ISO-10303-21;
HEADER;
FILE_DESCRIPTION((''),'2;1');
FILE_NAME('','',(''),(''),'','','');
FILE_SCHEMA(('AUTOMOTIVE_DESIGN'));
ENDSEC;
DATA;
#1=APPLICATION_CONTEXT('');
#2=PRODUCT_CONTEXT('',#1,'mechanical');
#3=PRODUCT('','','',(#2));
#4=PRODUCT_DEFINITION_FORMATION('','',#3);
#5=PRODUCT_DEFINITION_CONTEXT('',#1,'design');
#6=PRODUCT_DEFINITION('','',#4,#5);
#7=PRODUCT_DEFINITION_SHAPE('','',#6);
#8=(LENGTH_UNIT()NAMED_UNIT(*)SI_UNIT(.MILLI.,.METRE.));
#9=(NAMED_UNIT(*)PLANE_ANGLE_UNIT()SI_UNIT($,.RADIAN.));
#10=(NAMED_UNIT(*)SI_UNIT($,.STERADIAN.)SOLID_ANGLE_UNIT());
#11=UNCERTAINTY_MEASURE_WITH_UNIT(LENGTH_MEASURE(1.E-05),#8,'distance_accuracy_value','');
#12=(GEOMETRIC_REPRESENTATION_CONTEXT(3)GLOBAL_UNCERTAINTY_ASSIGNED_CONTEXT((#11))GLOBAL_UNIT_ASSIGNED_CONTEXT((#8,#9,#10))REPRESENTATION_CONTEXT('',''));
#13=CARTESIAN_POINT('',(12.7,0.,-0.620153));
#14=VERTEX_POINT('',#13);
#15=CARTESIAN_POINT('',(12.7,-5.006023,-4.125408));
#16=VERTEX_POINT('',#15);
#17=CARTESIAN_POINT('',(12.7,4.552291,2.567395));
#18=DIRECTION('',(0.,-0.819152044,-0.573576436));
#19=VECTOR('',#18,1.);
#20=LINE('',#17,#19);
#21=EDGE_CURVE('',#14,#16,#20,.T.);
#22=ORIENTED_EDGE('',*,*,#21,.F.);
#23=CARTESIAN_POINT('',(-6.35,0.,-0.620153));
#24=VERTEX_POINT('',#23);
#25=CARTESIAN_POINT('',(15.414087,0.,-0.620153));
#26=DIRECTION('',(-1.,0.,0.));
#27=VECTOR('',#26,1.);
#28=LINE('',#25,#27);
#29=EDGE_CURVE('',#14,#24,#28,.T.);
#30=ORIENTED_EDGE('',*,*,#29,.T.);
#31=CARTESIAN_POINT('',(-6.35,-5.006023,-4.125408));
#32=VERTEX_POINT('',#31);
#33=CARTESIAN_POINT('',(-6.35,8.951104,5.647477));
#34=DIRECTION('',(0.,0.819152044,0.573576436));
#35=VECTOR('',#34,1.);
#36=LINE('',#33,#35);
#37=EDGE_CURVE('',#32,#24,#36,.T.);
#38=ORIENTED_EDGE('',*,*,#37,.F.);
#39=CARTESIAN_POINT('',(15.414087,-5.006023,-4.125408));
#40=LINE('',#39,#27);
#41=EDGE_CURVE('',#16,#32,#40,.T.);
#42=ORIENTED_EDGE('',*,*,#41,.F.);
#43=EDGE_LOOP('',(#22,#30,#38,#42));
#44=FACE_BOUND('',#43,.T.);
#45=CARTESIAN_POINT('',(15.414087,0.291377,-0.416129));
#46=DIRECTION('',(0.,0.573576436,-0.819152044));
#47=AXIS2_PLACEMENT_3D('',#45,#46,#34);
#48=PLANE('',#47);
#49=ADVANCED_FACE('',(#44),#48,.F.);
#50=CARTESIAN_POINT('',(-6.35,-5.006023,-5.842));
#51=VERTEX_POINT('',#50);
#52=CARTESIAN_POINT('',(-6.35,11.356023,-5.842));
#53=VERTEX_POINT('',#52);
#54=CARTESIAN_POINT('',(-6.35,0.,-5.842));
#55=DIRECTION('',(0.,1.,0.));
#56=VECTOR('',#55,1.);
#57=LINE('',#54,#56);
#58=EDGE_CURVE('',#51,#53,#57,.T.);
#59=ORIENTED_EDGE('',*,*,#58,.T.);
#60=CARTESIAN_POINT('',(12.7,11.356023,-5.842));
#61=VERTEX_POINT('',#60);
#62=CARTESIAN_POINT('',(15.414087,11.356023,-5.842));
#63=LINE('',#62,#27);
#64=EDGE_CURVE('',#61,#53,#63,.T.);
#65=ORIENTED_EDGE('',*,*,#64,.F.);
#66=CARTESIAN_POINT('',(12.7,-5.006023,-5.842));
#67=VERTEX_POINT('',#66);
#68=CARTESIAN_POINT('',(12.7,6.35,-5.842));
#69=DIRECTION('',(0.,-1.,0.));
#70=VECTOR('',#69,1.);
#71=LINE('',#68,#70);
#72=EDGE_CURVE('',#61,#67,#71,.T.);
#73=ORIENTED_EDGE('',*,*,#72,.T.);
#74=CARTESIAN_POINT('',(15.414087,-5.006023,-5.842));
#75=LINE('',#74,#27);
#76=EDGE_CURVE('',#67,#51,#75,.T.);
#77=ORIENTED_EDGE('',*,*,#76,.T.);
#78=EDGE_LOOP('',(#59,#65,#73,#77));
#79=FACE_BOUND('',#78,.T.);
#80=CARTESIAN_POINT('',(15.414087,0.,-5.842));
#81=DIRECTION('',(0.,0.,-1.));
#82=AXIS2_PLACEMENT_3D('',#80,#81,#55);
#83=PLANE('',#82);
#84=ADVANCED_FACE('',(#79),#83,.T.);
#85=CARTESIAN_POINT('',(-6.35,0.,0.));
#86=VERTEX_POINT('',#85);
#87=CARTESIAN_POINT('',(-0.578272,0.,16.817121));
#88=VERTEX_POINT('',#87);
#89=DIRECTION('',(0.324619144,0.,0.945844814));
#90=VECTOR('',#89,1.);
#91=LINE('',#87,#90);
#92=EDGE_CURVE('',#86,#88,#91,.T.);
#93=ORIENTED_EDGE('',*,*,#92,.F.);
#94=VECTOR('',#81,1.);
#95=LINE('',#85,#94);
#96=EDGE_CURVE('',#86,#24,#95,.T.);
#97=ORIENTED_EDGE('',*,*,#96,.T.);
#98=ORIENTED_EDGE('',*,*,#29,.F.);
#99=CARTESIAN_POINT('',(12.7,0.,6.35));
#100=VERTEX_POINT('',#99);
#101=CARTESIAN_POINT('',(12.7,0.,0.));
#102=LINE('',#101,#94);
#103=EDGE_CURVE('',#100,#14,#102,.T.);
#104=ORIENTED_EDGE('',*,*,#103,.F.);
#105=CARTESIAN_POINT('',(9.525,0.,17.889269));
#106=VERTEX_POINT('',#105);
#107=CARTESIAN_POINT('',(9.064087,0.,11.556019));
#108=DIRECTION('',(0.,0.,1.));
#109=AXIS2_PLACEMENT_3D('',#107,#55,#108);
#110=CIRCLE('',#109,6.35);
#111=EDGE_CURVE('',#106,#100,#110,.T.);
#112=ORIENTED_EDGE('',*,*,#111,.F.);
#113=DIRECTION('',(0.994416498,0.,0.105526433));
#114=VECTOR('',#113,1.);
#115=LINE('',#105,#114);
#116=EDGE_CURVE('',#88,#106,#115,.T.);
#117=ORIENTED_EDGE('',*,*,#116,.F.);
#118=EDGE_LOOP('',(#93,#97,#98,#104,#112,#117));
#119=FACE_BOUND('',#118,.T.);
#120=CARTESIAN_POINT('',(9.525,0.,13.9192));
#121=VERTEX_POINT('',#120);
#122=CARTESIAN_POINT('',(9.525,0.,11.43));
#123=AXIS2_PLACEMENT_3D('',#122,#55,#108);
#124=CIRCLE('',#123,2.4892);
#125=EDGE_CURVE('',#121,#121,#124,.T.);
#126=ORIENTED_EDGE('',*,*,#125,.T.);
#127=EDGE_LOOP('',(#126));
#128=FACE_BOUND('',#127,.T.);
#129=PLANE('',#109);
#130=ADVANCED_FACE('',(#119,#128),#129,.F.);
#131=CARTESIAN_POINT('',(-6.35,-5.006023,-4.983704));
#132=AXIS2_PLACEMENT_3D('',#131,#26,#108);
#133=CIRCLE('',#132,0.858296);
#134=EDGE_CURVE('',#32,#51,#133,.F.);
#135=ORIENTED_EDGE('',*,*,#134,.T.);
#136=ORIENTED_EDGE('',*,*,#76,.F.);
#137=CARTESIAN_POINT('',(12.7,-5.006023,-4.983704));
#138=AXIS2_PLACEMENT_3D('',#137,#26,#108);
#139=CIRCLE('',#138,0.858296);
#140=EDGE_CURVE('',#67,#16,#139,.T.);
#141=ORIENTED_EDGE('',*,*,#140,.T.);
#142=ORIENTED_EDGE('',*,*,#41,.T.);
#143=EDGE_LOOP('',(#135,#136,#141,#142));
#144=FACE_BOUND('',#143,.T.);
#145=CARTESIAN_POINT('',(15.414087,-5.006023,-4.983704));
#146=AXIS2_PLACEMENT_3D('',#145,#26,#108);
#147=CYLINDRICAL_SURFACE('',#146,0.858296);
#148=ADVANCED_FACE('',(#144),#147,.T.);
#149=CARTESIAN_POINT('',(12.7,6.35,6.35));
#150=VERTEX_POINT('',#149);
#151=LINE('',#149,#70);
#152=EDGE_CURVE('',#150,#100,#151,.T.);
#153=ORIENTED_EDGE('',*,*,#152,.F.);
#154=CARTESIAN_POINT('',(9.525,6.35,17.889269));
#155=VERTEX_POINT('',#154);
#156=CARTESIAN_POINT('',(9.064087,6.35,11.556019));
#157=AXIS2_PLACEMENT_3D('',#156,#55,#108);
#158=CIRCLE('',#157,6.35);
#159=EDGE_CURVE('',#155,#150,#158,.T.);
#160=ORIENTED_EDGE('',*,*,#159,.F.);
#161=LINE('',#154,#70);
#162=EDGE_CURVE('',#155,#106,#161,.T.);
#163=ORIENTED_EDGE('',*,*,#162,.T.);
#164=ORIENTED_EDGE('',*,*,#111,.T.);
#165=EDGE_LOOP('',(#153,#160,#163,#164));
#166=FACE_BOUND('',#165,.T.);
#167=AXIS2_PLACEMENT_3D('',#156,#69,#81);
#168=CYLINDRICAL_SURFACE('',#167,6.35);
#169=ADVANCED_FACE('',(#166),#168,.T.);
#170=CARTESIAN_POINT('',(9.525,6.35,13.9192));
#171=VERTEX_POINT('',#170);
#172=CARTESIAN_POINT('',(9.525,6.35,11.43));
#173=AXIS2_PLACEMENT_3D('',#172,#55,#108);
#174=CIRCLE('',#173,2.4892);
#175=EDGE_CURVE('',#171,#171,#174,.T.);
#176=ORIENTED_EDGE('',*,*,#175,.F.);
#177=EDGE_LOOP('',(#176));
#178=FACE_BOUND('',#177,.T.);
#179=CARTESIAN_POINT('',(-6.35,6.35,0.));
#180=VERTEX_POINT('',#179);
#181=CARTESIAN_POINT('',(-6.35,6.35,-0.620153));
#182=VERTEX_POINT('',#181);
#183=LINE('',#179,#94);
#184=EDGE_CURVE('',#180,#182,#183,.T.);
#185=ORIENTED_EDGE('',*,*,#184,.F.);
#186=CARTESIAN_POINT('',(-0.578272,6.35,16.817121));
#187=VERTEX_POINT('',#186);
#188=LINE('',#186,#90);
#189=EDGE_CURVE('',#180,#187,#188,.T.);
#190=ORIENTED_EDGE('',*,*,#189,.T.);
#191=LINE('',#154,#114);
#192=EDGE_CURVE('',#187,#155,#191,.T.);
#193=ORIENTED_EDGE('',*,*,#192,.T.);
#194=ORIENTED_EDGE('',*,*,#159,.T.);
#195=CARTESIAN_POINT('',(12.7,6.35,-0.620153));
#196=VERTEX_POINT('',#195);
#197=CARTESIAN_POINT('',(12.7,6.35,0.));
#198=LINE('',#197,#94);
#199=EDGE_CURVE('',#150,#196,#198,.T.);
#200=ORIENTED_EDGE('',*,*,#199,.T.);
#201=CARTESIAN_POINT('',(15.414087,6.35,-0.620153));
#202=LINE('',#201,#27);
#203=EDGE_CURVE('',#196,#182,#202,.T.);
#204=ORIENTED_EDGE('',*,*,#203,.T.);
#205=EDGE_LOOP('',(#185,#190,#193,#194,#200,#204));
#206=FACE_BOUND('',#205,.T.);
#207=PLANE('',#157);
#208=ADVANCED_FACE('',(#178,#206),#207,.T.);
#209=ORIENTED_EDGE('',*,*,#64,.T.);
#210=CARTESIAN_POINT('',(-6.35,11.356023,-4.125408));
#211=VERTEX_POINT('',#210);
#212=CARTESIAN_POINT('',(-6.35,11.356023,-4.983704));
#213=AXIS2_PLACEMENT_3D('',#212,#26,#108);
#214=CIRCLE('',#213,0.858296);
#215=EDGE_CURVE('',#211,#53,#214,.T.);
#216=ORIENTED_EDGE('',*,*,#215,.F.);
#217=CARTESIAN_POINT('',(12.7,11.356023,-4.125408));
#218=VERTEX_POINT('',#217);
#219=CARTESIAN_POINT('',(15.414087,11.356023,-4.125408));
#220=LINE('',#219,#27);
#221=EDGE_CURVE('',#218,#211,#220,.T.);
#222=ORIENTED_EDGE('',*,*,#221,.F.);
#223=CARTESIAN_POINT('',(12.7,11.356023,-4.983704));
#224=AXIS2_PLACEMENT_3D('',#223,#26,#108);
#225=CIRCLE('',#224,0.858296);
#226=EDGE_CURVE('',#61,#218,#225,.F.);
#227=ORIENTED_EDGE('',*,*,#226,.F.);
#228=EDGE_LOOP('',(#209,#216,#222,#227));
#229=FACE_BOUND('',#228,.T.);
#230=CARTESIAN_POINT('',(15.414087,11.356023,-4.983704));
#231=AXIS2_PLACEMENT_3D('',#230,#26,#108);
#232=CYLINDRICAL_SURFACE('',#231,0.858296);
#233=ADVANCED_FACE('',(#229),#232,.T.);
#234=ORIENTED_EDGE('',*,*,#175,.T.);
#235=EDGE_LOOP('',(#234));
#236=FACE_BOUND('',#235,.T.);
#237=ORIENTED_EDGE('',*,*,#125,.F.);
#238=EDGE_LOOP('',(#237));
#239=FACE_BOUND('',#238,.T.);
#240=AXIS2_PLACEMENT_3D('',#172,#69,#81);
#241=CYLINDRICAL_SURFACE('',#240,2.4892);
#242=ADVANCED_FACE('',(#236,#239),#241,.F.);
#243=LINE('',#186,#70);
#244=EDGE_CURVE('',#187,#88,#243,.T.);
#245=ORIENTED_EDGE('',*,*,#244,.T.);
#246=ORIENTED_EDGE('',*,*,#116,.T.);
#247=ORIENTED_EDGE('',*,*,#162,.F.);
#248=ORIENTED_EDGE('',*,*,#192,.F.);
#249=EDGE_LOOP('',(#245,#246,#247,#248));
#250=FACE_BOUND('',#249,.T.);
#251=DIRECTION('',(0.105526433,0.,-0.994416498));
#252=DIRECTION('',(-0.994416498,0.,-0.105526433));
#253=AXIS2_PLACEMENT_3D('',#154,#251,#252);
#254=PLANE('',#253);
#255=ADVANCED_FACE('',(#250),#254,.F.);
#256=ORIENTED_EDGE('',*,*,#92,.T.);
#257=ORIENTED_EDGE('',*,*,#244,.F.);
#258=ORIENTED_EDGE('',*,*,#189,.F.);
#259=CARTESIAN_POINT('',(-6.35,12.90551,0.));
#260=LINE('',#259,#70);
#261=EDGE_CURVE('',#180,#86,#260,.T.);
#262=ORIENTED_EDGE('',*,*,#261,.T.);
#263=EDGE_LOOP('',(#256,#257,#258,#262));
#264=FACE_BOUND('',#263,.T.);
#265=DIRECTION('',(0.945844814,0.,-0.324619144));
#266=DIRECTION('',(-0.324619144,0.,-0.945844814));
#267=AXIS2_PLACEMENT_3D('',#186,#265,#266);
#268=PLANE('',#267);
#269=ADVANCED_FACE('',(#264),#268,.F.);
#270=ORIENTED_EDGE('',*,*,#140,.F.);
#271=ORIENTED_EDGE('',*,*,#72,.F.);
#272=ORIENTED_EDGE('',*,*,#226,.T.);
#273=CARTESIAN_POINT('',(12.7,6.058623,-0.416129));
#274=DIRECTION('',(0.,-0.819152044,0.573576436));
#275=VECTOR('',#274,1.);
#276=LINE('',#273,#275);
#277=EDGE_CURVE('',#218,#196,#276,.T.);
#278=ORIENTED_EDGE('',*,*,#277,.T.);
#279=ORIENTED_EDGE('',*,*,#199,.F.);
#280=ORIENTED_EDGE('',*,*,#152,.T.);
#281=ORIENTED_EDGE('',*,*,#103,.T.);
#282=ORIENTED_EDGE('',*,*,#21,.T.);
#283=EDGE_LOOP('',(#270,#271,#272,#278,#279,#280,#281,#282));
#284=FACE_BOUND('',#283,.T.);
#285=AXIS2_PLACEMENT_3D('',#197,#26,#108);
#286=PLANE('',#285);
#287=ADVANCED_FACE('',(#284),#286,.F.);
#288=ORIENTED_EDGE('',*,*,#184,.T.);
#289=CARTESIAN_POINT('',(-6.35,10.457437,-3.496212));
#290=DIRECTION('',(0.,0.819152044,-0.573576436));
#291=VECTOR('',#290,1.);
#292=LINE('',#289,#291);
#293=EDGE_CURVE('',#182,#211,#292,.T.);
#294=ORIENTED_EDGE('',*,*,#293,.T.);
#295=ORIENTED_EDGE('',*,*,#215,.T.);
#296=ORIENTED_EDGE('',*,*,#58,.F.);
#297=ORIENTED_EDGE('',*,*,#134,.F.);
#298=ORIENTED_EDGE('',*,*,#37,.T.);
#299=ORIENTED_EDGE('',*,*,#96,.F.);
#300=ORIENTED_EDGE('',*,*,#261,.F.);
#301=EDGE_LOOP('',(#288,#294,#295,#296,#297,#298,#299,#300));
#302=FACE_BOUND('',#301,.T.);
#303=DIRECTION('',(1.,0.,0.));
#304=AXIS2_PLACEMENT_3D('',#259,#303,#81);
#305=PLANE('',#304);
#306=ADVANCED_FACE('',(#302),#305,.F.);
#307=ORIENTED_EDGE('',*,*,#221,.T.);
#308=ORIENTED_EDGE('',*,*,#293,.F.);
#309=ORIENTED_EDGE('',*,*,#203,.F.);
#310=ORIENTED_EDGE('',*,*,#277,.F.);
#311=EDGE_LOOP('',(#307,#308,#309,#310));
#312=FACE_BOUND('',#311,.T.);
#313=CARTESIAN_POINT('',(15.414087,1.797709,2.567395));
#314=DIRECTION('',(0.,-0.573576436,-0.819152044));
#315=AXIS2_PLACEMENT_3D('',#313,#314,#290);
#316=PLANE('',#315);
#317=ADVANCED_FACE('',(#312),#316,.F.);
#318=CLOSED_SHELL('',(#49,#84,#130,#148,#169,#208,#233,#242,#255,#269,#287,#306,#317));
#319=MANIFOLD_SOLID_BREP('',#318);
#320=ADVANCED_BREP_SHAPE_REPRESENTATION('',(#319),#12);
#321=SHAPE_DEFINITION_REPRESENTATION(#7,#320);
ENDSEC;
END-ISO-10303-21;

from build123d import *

# Parameters (mm, degrees)
SKETCH1_R               = 2.4892
BOSS_EXTRUDE1_DEPTH     = 6.35
BOSS_EXTRUDE2_START     = -6.35
BOSS_EXTRUDE2_DEPTH     = 19.05
BOSS_EXTRUDE2_START_2   = -6.555460136
BOSS_EXTRUDE2_2_DEPTH   = 19.460920272
BOSS_EXTRUDE2_START_3   = -10
BOSS_EXTRUDE2_3_DEPTH   = 3.65
CUT_EXTRUDE1_DEPTH      = 27.910448217
CUT_EXTRUDE1_DEPTH_BACK = 27.910448217
SKETCH3_W               = 2.179354936
SKETCH3_H               = 6.35
CUT_EXTRUDE2_DEPTH      = 31.98795935
CUT_EXTRUDE2_DEPTH_BACK = 31.98795935


with BuildPart() as part:
    # Sketch1 → Boss-Extrude1 (new body)
    with BuildSketch(Plane(origin=(0, 0, 0), x_dir=(1, 0, 0), z_dir=(0, 1, 0))):
        with BuildLine():
            Line((9.525, -17.889269346), (-0.578271622, -16.817120786))
            Line((-0.578271622, -16.817120786), (-6.35, 0))
            Line((-6.35, 0), (12.7, 0))
            Line((12.7, 0), (12.7, -6.35))
            ThreePointArc((12.7, -6.35), (15.186560179, -13.240601753), (9.525, -17.889269346))
        make_face()
        with Locations(Location((9.525, -11.43, 0), (0, 0, 270))):
            Circle(SKETCH1_R, mode=Mode.SUBTRACT)
    extrude(amount=BOSS_EXTRUDE1_DEPTH)

    # Boss-Extrude2: read off the stored shape, not the designer's step
    # Boss-Extrude2 outline → Boss-Extrude2 (add)
    with BuildSketch(Plane.YZ.offset(BOSS_EXTRUDE2_START)):
        with BuildLine():
            ThreePointArc((11.551615481, -6.35), (12.905510296, -4.996105185), (11.551615481, -3.642210371))
            Line((11.551615481, -3.642210371), (6.35, 0))
            Line((6.35, 0), (0, 0))
            Line((0, 0), (-5.201615481, -3.642210371))
            ThreePointArc((-5.201615481, -3.642210371), (-6.555510296, -4.996105185), (-5.201615481, -6.35))
            Line((-5.201615481, -6.35), (11.551615481, -6.35))
        make_face()
    extrude(amount=BOSS_EXTRUDE2_DEPTH)

    # Boss-Extrude2 2 outline → Boss-Extrude2 2 (add)
    with BuildSketch(Plane(origin=(0, 0, 0), x_dir=(1, 0, 0), z_dir=(0, 1, 0)).offset(BOSS_EXTRUDE2_START_2)):
        Polygon((-8.529354936, 6.35), (-6.35, 0), (-6.35, 6.35), align=None)
    extrude(amount=BOSS_EXTRUDE2_2_DEPTH)

    # Boss-Extrude2 3 outline → Boss-Extrude2 3 (cut)
    with BuildSketch(Plane.YZ.offset(BOSS_EXTRUDE2_START_3)):
        with BuildLine():
            Line((12.905460136, 0), (6.35, 0))
            Line((6.35, 0), (11.551615481, -3.642210371))
            ThreePointArc((11.551615481, -3.642210371), (12.504834401, -4.034645431), (12.905460136, -4.984450993))
            Line((12.905460136, -4.984450993), (12.905460136, 0))
        make_face()
        with BuildLine():
            ThreePointArc((12.905460136, -5.007759378), (12.504834401, -5.95756494), (11.551615481, -6.35))
            Line((11.551615481, -6.35), (12.905460136, -6.35))
            Line((12.905460136, -6.35), (12.905460136, -5.007759378))
        make_face()
        with BuildLine():
            Line((0, 0), (-6.555460136, 0))
            Line((-6.555460136, 0), (-6.555460136, -4.984450993))
            ThreePointArc((-6.555460136, -4.984450993), (-6.154834401, -4.034645431), (-5.201615481, -3.642210371))
            Line((-5.201615481, -3.642210371), (0, 0))
        make_face()
        with BuildLine():
            ThreePointArc((-5.201615481, -6.35), (-6.154834401, -5.95756494), (-6.555460136, -5.007759378))
            Line((-6.555460136, -5.007759378), (-6.555460136, -6.35))
            Line((-6.555460136, -6.35), (-5.201615481, -6.35))
        make_face()
    extrude(amount=BOSS_EXTRUDE2_3_DEPTH, mode=Mode.SUBTRACT)

    # Sketch3 → Cut-Extrude1 (cut, two sides: drawn at the far end of the back side and taken through both)
    with BuildSketch(Plane.XZ.offset(-CUT_EXTRUDE1_DEPTH_BACK)):
        with Locations((-7.439677468, -3.175)):
            Rectangle(SKETCH3_W, SKETCH3_H)
    extrude(amount=CUT_EXTRUDE1_DEPTH + CUT_EXTRUDE1_DEPTH_BACK, mode=Mode.SUBTRACT)

    # Sketch4 → Cut-Extrude2 (cut, two sides: drawn at the far end of the back side and taken through both)
    with BuildSketch(Plane.ZY.offset(6.35).offset(-CUT_EXTRUDE2_DEPTH_BACK)):
        with BuildLine():
            ThreePointArc((-5.842, -5.006022622), (-4.983704134, -5.864318488), (-4.125408268, -5.006022622))
            Line((-4.125408268, -5.006022622), (-0.620153491, 0))
            Line((-0.620153491, 0), (0, 0))
            Line((0, 0), (-3.642210371, -5.201615481))
            ThreePointArc((-3.642210371, -5.201615481), (-4.996105185, -6.555510296), (-6.35, -5.201615481))
            Line((-6.35, -5.201615481), (-6.35, 11.551615481))
            ThreePointArc((-6.35, 11.551615481), (-4.996105185, 12.905510296), (-3.642210371, 11.551615481))
            Line((-3.642210371, 11.551615481), (0, 6.35))
            Line((0, 6.35), (-0.620153491, 6.35))
            Line((-0.620153491, 6.35), (-4.125408268, 11.356022622))
            ThreePointArc((-4.125408268, 11.356022622), (-4.983704134, 12.214318488), (-5.842, 11.356022622))
            Line((-5.842, 11.356022622), (-5.842, -5.006022622))
        make_face()
    extrude(amount=CUT_EXTRUDE2_DEPTH + CUT_EXTRUDE2_DEPTH_BACK, mode=Mode.SUBTRACT)


solid = part.part
